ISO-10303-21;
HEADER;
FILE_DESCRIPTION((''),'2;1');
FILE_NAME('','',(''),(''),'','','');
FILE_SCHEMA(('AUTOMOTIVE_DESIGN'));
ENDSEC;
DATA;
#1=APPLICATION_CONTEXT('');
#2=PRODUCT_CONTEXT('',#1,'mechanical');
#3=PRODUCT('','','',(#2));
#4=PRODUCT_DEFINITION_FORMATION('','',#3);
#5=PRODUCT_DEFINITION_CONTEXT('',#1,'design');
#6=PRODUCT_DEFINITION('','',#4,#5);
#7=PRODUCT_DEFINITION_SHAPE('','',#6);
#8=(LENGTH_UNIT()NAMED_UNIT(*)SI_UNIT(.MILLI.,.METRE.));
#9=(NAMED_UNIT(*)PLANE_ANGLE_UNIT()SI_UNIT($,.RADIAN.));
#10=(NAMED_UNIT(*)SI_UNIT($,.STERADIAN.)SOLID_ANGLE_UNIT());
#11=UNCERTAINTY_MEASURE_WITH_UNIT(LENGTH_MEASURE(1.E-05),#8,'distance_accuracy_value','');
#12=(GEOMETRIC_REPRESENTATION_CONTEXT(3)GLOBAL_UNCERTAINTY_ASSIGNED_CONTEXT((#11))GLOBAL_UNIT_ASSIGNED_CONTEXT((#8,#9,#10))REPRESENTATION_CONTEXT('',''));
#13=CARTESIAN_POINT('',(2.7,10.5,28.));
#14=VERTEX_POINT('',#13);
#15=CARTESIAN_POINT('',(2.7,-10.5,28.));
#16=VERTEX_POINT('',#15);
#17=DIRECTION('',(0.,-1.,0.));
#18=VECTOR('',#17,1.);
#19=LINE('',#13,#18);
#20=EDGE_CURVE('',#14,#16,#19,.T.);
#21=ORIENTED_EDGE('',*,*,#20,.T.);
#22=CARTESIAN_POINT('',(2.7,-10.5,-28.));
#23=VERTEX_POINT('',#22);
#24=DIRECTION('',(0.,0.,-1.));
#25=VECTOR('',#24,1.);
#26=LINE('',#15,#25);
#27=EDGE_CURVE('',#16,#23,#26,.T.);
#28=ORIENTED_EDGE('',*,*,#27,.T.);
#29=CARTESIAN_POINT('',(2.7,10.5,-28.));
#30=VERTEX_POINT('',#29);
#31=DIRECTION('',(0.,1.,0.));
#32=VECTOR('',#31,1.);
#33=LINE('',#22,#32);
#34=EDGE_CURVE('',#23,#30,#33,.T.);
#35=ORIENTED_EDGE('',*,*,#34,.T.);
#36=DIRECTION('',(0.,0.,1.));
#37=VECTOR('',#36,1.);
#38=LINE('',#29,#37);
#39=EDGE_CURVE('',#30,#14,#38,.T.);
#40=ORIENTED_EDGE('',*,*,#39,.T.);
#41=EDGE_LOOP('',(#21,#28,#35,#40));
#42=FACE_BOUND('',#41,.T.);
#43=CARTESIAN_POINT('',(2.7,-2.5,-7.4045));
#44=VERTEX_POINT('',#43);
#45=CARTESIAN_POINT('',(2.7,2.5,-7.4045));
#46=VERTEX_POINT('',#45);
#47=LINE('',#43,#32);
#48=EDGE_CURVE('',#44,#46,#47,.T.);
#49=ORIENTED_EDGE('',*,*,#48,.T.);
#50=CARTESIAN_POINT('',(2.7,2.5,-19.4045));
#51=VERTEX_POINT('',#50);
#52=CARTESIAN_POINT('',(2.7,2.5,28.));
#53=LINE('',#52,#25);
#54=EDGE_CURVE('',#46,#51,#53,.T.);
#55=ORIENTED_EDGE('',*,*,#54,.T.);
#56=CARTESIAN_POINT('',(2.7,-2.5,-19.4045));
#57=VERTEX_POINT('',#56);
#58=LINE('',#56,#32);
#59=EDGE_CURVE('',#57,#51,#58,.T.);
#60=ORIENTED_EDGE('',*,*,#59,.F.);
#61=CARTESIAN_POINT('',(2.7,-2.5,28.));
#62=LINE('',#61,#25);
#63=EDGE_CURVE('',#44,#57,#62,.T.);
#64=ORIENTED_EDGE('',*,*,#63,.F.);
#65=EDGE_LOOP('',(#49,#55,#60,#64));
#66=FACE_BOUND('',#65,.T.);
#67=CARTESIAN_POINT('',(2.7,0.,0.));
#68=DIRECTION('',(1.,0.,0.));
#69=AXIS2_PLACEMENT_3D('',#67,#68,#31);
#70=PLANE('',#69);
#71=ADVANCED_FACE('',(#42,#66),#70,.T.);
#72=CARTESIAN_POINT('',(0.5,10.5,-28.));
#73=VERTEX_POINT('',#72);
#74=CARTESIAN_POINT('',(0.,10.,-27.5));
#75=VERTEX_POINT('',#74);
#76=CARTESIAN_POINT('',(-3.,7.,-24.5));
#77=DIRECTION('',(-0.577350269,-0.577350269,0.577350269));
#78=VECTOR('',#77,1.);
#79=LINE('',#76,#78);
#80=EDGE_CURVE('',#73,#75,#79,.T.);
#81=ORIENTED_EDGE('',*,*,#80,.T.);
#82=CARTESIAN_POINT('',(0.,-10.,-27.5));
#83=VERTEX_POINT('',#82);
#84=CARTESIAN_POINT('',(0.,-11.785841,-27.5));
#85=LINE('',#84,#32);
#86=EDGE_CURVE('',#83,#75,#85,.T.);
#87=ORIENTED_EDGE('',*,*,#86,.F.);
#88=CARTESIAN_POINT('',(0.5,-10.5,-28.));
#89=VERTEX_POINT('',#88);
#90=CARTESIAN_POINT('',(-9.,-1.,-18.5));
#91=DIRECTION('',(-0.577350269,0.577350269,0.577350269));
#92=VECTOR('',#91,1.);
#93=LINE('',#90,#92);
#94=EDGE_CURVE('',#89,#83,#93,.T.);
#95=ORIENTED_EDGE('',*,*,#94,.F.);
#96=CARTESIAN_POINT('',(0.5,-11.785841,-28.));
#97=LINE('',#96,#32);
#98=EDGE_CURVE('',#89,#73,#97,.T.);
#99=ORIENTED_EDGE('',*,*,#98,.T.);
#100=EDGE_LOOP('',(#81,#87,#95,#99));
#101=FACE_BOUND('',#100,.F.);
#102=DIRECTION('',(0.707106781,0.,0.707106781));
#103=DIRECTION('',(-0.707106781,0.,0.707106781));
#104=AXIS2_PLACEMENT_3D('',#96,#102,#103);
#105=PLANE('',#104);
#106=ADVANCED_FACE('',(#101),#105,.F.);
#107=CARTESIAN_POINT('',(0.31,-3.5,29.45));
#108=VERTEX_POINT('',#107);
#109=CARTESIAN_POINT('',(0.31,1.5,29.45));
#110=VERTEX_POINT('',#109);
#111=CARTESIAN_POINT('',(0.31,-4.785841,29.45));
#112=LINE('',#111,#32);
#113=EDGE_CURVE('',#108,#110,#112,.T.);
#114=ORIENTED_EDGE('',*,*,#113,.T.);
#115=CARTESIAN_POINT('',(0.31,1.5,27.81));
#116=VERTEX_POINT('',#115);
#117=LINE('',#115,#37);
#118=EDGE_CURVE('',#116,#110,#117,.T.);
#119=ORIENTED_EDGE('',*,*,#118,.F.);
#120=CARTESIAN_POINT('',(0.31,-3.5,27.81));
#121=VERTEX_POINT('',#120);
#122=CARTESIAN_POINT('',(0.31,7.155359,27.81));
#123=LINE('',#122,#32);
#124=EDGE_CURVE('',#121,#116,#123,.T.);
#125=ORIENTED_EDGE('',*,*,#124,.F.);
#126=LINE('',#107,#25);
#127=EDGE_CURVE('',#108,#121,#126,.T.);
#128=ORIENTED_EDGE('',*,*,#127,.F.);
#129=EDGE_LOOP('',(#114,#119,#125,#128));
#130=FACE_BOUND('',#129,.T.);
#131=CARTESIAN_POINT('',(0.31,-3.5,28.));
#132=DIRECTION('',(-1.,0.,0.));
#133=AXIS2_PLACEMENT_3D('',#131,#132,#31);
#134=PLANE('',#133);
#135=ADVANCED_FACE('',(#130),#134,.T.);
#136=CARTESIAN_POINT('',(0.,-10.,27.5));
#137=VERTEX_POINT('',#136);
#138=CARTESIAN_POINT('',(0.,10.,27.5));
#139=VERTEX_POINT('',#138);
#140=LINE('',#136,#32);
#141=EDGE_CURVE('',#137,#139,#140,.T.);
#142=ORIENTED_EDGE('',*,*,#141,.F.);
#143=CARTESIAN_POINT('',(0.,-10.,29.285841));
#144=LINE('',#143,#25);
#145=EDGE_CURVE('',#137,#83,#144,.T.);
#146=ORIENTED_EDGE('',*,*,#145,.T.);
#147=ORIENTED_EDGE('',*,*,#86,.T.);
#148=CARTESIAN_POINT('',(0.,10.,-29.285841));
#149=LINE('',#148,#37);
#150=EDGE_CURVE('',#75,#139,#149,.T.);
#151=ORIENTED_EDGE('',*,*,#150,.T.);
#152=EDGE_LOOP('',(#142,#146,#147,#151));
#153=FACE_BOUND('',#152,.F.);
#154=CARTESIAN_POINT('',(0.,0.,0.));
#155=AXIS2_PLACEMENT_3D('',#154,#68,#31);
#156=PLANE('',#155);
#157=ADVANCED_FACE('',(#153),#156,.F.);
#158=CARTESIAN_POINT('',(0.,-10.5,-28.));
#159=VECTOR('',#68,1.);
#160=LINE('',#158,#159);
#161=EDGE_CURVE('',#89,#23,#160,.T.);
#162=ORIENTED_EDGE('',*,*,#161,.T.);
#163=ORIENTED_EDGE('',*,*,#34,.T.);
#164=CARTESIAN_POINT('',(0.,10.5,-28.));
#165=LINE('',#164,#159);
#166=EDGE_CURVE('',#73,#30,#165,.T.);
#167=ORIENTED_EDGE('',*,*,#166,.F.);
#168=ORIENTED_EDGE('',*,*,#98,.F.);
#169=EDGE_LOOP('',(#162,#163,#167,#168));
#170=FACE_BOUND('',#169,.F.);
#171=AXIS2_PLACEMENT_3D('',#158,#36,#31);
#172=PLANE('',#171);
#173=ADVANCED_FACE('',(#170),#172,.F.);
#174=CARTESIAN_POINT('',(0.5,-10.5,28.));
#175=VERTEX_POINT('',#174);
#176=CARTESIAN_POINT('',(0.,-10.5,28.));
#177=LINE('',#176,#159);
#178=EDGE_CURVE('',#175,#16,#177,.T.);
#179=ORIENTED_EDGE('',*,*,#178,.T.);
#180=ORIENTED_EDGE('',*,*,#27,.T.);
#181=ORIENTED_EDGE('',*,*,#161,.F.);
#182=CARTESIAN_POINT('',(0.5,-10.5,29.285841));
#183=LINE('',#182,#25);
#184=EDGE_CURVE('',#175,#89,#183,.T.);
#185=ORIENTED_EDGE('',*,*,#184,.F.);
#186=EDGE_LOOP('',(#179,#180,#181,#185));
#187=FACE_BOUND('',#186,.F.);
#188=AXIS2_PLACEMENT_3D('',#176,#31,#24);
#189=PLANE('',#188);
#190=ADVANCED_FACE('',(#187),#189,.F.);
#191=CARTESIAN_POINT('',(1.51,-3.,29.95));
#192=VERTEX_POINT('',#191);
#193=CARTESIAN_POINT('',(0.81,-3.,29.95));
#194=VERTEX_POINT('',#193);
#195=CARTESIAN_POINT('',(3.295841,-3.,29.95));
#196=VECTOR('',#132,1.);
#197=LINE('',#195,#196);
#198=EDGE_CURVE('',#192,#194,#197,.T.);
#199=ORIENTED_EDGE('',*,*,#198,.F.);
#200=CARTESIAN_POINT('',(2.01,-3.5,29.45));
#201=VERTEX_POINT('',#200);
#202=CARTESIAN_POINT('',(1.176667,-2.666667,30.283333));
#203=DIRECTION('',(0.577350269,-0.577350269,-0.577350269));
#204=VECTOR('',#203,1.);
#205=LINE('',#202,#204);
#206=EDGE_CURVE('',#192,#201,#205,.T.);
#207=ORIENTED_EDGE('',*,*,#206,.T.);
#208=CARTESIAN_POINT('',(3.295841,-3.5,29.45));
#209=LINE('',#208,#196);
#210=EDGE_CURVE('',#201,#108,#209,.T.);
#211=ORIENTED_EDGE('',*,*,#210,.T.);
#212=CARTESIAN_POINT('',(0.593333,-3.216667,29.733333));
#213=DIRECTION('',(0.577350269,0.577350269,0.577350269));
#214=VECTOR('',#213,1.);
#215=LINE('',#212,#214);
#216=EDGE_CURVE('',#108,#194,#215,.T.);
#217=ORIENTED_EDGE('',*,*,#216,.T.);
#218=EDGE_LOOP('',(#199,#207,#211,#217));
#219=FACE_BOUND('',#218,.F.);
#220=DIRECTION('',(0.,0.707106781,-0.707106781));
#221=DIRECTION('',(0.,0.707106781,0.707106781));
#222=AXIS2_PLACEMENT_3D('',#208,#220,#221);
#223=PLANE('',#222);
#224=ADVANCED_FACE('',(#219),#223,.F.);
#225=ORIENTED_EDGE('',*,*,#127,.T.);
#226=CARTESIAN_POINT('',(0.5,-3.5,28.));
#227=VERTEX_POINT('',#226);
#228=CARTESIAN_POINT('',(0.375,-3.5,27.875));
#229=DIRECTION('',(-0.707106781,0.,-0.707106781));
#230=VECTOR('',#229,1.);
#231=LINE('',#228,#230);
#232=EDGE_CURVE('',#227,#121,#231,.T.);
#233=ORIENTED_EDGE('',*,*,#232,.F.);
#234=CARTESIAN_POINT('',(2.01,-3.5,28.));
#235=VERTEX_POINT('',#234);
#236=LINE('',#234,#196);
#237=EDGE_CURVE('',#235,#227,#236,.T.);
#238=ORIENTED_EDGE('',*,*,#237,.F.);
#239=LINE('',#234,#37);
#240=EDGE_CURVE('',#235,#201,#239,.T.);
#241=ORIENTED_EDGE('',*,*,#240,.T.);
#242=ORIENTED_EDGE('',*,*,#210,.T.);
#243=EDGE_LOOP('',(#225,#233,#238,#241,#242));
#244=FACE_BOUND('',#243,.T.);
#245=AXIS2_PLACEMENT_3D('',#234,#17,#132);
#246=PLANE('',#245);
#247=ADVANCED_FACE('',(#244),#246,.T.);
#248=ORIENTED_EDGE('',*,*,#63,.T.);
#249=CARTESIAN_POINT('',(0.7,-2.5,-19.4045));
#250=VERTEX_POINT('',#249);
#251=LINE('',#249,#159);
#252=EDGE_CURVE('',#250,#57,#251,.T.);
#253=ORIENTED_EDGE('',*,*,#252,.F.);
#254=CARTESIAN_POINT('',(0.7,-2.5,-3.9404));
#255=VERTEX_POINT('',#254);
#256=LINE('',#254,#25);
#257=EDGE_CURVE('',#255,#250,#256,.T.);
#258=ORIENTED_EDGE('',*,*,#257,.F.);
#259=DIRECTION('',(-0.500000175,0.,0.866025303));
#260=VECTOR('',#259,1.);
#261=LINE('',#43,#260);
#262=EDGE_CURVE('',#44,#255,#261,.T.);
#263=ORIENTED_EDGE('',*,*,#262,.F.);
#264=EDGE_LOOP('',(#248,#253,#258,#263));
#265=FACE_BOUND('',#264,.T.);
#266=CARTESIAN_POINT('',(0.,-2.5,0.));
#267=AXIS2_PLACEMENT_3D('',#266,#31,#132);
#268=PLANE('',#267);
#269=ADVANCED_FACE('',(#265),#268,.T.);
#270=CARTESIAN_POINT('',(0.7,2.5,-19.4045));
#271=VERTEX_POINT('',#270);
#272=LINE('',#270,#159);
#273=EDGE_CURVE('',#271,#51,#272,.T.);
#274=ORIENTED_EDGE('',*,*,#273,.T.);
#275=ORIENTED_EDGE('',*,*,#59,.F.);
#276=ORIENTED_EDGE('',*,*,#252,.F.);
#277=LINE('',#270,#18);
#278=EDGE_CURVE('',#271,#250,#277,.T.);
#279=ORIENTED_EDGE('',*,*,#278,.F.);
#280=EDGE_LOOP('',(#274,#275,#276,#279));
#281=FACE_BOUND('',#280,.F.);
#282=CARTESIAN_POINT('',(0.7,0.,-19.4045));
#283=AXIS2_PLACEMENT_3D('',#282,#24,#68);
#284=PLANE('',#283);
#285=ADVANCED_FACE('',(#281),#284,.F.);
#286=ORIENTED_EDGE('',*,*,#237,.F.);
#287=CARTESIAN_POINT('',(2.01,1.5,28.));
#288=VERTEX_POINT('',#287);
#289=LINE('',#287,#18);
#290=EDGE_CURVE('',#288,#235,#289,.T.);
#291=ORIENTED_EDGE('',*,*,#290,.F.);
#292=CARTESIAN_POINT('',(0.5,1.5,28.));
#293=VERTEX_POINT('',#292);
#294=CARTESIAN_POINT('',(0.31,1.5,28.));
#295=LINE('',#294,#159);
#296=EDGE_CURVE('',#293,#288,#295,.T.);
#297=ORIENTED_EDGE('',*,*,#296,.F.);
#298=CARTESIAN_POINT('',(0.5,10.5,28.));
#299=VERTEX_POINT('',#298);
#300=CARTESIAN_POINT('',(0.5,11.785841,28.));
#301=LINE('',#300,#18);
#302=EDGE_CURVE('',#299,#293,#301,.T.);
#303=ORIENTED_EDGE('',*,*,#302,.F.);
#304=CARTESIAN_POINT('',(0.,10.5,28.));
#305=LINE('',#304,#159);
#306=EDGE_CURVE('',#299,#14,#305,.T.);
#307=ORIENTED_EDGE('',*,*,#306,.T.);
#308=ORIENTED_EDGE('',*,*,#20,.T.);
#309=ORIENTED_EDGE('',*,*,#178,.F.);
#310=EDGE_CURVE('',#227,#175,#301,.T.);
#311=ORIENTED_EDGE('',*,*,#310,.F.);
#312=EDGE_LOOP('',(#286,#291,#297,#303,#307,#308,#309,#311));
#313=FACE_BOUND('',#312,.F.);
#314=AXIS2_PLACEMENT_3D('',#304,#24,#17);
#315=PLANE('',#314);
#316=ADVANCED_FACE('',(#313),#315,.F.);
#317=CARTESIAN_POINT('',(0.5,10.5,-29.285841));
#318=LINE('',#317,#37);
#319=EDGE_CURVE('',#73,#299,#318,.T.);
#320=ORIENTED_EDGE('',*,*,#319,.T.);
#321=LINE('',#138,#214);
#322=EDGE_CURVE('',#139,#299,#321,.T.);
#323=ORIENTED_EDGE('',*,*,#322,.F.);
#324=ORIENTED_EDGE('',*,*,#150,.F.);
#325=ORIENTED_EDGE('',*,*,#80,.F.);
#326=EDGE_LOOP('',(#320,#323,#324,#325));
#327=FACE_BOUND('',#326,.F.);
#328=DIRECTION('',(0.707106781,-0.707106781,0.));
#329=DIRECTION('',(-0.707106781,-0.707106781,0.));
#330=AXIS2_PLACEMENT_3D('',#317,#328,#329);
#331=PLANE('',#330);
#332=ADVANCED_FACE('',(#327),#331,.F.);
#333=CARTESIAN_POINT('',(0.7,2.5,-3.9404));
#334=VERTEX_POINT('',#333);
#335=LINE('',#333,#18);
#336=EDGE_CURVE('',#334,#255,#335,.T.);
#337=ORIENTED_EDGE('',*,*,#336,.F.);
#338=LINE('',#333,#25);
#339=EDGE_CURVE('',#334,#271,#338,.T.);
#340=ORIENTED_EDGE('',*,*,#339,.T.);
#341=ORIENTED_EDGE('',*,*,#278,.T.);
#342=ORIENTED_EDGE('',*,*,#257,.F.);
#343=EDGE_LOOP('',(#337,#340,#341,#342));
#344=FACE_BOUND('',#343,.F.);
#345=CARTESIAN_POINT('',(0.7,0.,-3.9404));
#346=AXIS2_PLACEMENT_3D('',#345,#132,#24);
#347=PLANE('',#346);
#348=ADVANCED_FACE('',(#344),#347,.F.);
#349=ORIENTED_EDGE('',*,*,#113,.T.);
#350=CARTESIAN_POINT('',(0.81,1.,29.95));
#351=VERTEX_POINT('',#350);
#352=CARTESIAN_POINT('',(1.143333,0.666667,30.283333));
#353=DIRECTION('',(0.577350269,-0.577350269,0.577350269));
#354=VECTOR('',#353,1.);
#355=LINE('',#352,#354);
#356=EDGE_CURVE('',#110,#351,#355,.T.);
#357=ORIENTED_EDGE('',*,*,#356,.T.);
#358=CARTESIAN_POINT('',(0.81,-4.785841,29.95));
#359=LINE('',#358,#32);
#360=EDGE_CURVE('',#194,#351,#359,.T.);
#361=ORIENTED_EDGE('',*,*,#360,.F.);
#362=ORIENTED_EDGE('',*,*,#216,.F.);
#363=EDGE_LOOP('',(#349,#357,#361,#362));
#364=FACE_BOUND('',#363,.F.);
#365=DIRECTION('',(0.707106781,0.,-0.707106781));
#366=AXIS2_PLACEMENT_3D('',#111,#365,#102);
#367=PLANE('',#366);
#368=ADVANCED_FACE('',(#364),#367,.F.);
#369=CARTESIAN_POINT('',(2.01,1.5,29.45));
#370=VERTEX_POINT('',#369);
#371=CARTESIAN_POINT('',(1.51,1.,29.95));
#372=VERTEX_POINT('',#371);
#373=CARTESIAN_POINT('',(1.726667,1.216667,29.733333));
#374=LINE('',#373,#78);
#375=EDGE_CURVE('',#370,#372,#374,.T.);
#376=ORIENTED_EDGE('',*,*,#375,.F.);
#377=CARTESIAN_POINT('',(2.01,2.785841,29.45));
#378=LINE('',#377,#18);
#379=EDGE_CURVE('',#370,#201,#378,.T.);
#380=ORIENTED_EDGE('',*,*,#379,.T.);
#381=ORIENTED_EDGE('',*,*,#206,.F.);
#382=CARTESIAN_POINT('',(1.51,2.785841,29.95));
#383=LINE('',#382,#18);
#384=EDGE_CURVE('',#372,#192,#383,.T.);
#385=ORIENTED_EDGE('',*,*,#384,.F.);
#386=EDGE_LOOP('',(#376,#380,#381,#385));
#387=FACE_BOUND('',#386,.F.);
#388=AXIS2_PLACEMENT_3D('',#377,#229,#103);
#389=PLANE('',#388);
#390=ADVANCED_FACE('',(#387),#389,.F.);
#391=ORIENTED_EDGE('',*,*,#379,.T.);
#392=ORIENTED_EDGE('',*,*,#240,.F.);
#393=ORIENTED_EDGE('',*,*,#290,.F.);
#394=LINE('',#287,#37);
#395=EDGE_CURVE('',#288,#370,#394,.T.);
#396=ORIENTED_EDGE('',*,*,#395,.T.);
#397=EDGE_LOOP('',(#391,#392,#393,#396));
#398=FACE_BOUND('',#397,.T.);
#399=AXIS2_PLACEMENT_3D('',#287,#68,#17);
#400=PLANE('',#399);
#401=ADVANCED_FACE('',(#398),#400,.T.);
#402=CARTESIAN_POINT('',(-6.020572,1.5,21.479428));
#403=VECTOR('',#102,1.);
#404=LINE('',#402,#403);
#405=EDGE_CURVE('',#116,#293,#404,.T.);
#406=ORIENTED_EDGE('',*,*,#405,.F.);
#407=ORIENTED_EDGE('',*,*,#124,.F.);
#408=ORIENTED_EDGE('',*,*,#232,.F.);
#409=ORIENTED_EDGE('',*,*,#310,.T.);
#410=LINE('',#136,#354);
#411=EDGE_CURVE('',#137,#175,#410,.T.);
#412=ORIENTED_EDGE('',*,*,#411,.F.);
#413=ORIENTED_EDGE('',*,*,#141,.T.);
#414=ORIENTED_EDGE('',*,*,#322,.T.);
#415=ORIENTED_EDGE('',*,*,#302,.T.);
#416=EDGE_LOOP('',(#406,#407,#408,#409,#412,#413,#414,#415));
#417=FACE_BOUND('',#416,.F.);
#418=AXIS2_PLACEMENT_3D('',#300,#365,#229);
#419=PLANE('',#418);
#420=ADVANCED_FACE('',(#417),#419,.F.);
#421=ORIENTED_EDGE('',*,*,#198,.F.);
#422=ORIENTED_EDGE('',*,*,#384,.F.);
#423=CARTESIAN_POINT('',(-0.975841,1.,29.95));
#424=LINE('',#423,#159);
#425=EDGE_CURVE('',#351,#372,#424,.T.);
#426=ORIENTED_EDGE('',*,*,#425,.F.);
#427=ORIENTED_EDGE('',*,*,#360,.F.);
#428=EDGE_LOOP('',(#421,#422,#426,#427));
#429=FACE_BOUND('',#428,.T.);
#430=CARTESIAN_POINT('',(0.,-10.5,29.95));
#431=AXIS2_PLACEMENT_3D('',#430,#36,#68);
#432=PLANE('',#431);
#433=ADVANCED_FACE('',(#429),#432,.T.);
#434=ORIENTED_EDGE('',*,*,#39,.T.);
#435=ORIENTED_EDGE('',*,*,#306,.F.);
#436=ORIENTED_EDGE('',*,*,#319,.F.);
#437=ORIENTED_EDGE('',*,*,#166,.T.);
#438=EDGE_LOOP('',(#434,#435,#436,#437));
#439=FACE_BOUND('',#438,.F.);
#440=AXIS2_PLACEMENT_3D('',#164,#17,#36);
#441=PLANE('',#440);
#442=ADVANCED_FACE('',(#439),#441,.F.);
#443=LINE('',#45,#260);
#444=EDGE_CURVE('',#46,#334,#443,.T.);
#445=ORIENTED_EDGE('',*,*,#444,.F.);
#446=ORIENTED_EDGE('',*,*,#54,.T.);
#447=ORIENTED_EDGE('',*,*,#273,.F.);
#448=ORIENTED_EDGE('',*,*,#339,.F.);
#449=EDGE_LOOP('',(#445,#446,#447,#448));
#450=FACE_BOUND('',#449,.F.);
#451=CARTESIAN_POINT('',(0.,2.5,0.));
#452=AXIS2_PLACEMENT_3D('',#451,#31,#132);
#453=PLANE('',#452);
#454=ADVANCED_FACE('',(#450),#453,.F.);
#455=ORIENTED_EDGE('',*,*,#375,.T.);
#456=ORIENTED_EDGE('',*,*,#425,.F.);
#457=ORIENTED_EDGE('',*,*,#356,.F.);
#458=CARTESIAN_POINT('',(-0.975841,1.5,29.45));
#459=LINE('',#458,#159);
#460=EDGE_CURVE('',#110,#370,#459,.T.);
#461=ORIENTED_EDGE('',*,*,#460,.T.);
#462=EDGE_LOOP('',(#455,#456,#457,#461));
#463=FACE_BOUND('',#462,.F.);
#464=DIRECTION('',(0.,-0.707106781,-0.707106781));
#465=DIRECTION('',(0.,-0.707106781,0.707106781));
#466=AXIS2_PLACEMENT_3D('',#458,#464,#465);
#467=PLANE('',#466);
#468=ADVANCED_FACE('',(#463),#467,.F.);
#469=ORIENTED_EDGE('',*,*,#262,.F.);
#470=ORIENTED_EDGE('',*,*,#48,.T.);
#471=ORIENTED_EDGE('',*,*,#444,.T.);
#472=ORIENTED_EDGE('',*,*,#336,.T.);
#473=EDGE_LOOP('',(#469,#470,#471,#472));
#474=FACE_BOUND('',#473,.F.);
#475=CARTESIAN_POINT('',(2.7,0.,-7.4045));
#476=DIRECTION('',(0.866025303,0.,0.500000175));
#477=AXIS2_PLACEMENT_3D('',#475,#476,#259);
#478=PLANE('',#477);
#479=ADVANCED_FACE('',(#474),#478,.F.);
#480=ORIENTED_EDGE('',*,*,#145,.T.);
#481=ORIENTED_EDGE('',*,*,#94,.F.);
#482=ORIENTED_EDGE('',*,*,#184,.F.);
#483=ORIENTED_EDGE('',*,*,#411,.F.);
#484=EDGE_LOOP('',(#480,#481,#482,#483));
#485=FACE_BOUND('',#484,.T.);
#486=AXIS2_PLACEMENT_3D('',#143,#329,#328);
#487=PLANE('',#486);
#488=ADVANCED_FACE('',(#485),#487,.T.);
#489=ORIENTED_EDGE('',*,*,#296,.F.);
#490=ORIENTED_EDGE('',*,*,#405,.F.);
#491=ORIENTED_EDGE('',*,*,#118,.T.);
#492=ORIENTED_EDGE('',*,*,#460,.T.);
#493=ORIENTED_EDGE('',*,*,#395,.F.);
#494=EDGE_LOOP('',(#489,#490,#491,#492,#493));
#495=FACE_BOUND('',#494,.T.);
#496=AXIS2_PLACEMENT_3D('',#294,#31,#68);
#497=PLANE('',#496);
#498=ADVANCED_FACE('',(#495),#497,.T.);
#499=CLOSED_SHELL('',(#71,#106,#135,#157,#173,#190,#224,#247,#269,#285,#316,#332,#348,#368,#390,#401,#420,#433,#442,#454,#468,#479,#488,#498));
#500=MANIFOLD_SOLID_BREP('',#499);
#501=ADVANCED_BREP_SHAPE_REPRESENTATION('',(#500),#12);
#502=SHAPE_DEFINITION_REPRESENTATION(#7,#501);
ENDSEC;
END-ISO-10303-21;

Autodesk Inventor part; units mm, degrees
ref_plane "YZ Plane" through (0, 0, 0) normal (1, 0, 0) x (0, 1, 0)
ref_plane "XZ Plane" through (0, 0, 0) normal (0, 1, 0) x (-1, 0, 0)
ref_plane "XY Plane" through (0, 0, 0) normal (0, 0, 1) x (1, 0, 0)
sketch "스케치1" plane through (0, 0, 0) normal (1, 0, 0) x (0, 1, 0)
  line L0 (10.5, 28) -> (-10.5, 28)
  line L1 (-10.5, 28) -> (-10.5, -28)
  line L2 (-10.5, -28) -> (10.5, -28)
  line L3 (10.5, -28) -> (10.5, 28)
  line L4 (10.5, 28) -> (-10.5, -28) construction
  line L5 (-10.5, 28) -> (10.5, -28) construction
  point P0 (0, 0)
  dimension "d0" = 21
  dimension "d1" = 56
extrude "돌출1" add sketch "스케치1" along normal blind 2.7
sketch "스케치2" plane through (0, -10.5, 28) normal (0, 0, 1) x (1, 0, 0)
  line L0 (0.31, 12) -> (2.01, 12)
  line L1 (2.01, 12) -> (2.01, 7)
  line L2 (2.01, 7) -> (0.31, 7)
  line L3 (0.31, 7) -> (0.31, 12)
  line L4 (0.31, 12) -> (2.01, 7) construction
  line L5 (2.01, 12) -> (0.31, 7) construction
  line L6 (-0.39, -0.5) -> (-0.39, 15)
  line L7 (-0.39, -0.5) -> (2.9, -0.5)
  line L8 (2.7, 0) -> (2.7, 21) projected
  line L9 (0, 0) -> (2.7, 0) projected
  point P0 (0, 10.5)
  point P1 (35, -7)
  point P2 (1.16, 9.5)
  dimension "d4" = 1.7
  dimension "d5" = 5
  dimension "d6" = 0.7
  dimension "d8" = 0.69
  dimension "d21" = 9.5
extrude "돌출2" add sketch "스케치2" along normal blind 1.95
chamfer "모따기1" distance 0.5 angle 45 8 edges at (0, -10.5, 0) (0, 0, 28) (0, 10.5, 0) (0, 0, -28) (2.01, -1, 29.95) (1.16, 1.5, 29.95) (0.31, -1, 29.95) (1.16, -3.5, 29.95)
sketch "스케치3" plane through (0, 0, 0) normal (0, 1, 0) x (-1, 0, 0)
  line L0 (-2.7, 28) -> (-2.7, -28) projected
  line L1 (-2.7, -7.4045) -> (-0.7, -3.9404)
  line L2 (-0.7, -3.9404) -> (-0.7, -19.4045)
  line L3 (-0.7, -19.4045) -> (-2.7, -19.4045)
  line L4 (-2.7, -19.4045) -> (-2.7, -7.4045)
  point P0 (0, 0)
  dimension "d18" = 12
  dimension "d19" = 30
  dimension "d20" = 2
extrude "돌출4" cut sketch "스케치3" along normal mid plane 5
properties part number "bt cover"
